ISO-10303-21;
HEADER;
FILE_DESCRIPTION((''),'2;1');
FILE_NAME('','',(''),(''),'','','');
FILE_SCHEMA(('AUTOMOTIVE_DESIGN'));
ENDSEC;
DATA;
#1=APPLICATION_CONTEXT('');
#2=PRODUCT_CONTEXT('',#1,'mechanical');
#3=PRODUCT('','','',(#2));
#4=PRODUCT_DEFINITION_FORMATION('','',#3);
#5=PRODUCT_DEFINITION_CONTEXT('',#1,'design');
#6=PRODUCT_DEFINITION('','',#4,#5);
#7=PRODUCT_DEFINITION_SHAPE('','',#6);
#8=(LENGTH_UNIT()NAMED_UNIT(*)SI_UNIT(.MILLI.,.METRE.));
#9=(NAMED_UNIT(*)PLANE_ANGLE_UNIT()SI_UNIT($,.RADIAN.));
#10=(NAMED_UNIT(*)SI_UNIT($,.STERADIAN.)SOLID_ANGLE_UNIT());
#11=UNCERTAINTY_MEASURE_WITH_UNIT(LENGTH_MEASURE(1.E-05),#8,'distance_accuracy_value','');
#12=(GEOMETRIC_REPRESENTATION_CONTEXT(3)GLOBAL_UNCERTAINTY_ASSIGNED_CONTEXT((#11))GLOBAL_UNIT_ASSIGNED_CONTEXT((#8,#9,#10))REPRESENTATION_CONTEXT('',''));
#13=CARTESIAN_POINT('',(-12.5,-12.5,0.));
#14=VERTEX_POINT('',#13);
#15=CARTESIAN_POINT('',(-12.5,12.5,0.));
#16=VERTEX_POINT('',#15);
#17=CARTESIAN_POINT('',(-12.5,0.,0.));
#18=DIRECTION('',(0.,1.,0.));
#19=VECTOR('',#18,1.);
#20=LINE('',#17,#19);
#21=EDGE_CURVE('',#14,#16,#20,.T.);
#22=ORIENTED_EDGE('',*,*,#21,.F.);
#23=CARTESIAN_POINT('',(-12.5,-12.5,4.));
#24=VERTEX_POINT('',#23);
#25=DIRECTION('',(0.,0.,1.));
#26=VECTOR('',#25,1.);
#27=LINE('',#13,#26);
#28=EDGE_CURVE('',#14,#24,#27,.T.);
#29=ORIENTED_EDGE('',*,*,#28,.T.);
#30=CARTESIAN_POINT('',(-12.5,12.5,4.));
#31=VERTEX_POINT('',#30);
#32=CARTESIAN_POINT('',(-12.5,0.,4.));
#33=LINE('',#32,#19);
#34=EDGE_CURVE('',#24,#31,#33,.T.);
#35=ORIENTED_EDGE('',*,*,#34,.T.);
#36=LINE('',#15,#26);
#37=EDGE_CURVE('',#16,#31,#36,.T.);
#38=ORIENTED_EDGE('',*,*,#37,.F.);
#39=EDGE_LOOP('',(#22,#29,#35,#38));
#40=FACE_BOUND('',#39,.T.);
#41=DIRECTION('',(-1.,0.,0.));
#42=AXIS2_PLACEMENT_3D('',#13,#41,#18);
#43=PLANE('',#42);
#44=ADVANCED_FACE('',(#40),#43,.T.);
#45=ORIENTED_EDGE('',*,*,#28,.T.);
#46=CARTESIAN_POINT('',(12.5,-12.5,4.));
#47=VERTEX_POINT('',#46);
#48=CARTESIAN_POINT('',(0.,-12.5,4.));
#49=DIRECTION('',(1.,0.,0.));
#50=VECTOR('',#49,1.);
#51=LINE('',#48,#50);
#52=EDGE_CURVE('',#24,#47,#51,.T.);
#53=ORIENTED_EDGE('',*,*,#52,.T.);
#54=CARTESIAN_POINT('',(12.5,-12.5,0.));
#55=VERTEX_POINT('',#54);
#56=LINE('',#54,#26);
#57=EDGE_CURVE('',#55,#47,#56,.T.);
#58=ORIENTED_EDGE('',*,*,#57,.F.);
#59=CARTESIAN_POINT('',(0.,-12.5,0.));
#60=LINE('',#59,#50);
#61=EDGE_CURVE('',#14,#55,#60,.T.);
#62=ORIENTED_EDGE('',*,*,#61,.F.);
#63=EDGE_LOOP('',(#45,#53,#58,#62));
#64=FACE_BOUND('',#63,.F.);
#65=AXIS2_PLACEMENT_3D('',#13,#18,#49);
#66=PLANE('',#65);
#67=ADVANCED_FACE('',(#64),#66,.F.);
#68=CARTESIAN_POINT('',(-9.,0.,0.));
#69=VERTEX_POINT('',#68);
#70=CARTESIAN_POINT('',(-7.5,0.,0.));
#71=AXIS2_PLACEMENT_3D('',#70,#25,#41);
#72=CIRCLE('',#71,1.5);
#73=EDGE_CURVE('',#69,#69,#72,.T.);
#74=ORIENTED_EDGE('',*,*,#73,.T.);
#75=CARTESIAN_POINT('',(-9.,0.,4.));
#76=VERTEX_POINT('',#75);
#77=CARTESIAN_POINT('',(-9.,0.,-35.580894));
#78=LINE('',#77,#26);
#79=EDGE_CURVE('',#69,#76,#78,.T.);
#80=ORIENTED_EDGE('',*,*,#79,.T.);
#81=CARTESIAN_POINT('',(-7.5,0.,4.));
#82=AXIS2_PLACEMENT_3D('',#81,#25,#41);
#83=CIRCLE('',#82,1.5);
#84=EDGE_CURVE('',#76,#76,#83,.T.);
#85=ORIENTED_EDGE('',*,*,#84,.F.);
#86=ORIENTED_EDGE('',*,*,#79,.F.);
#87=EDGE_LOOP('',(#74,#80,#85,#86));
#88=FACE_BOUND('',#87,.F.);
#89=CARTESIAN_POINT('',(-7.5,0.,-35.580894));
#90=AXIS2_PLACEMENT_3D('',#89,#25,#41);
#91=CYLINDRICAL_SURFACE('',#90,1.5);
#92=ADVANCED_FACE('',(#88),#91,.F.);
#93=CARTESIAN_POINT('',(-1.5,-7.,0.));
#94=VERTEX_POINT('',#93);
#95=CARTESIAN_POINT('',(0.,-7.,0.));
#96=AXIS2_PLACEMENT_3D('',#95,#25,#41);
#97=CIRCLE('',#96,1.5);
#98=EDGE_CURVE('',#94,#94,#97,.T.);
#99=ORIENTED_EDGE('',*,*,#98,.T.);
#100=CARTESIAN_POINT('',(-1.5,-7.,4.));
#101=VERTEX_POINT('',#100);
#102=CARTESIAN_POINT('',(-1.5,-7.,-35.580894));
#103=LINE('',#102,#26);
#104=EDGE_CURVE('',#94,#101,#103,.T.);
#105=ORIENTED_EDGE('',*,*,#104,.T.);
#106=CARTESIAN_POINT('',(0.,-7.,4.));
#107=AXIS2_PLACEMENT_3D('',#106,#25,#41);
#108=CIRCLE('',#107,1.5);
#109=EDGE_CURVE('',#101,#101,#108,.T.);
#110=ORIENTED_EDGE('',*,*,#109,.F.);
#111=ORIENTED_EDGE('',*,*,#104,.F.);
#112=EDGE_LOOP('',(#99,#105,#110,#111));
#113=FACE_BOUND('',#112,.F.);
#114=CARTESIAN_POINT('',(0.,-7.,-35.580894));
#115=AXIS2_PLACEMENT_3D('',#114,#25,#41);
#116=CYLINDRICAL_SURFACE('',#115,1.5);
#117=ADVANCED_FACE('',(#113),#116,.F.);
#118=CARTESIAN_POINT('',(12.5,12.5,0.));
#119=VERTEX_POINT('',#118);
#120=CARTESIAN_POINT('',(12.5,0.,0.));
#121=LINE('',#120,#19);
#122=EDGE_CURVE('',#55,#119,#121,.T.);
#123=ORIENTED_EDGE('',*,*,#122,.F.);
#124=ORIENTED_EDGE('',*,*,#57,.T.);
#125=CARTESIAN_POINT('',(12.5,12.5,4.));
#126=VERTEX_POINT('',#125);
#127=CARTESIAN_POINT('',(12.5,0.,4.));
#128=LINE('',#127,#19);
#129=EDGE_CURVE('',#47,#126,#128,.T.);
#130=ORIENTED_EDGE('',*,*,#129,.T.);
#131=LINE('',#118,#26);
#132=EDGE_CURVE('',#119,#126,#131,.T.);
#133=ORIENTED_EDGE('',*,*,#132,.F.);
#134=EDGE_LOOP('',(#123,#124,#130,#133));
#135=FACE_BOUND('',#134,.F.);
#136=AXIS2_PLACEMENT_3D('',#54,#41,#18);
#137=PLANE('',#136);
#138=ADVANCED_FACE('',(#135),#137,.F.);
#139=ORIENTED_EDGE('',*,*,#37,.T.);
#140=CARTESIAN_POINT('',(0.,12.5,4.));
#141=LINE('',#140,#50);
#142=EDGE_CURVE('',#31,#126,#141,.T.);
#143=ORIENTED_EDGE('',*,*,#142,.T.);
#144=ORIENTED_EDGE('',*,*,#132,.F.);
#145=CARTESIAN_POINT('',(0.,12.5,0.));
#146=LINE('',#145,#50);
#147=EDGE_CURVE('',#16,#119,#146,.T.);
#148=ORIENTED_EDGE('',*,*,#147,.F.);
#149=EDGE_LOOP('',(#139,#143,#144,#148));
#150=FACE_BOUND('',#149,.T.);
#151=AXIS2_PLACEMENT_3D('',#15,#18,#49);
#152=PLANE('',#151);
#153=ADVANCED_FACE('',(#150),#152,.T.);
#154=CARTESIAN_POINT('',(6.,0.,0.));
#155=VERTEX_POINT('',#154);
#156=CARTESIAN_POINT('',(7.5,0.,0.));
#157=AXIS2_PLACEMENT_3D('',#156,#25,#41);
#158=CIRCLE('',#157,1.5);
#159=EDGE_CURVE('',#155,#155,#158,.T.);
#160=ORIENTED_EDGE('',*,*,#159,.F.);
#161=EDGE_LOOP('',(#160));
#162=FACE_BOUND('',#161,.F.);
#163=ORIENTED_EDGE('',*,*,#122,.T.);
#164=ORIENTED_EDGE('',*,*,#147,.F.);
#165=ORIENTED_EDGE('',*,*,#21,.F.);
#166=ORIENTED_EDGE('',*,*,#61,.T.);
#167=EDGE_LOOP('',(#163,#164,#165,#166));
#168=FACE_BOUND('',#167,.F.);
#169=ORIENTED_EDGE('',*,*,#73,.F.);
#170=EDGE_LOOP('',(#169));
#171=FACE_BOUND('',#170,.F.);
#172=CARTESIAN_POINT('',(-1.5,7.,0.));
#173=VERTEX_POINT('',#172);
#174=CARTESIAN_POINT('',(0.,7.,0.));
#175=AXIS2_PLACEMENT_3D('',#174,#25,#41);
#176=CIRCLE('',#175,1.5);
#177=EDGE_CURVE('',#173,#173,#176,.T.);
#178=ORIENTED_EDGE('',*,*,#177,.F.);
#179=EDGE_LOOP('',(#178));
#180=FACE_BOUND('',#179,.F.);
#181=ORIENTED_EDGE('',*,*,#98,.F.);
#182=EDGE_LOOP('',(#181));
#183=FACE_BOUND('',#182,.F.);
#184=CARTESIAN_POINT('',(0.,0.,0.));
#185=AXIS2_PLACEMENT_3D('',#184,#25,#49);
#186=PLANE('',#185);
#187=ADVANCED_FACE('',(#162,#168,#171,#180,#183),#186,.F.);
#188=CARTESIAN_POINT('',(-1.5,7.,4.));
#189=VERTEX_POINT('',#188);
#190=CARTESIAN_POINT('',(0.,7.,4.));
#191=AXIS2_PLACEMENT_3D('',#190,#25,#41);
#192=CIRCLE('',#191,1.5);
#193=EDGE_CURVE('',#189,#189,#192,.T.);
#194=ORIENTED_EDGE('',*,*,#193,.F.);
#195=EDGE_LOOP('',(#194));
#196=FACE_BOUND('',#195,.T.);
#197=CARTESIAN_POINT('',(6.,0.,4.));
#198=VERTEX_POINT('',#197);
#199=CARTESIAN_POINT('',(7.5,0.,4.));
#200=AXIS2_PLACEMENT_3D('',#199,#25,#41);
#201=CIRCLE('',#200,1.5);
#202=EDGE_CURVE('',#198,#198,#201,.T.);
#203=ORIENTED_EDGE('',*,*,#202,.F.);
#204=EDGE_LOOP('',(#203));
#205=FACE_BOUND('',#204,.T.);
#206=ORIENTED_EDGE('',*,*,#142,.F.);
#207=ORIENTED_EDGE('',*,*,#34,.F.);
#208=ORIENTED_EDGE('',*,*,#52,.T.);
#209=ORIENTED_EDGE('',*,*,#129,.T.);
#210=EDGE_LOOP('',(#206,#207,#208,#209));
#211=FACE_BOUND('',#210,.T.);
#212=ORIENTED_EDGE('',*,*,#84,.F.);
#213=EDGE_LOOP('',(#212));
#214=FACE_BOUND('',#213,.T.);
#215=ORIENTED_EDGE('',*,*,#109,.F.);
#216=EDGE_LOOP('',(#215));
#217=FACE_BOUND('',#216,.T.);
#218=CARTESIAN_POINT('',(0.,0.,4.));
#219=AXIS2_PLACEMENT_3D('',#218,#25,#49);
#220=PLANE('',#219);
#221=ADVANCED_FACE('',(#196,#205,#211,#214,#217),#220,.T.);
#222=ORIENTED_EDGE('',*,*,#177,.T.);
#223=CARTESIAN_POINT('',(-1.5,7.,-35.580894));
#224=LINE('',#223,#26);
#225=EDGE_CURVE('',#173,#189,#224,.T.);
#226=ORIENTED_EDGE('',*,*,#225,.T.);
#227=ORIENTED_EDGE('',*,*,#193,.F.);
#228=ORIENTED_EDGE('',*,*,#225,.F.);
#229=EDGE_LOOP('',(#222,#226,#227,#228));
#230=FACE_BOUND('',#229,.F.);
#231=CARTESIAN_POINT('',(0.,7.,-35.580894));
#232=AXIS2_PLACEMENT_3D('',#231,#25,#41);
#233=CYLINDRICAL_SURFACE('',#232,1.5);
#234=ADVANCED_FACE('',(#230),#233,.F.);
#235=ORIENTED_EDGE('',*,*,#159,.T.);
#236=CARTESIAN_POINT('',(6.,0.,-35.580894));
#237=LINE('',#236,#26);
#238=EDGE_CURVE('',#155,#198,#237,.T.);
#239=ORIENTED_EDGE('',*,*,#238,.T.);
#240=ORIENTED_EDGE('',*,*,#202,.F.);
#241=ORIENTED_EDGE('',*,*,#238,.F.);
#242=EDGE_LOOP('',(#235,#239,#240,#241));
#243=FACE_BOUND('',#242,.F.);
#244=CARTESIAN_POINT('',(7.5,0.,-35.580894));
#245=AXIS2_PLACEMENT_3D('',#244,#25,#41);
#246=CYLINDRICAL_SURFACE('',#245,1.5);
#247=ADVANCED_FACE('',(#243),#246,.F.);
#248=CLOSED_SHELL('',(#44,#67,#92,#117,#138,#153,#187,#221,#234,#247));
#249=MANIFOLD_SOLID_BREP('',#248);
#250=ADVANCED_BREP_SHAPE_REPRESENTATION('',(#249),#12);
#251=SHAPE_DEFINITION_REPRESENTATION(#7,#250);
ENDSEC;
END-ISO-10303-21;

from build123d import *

# Parameters (mm, degrees)
F0_W     = 25
F0_H     = 25
F1_DEPTH = 4
F2_D     = 3


# Not quite as in the source:
# - a feature names something its author has since deleted; it is built from what else it names


with BuildPart() as f1:
    # F0 (on Top) → F1 (new body)
    with BuildSketch(Plane.XY):
        Rectangle(F0_W, F0_H)
    extrude(amount=F1_DEPTH)

    # F2 (through all)
    with Locations(Plane(origin=(0, 0, 0), x_dir=(1, 0, 0), z_dir=(0, 0, -1))):
        with Locations((-7.5, 0), (7.5, 0), (0, -7), (0, 7)):
            Hole(F2_D / 2)


solid = f1.part
